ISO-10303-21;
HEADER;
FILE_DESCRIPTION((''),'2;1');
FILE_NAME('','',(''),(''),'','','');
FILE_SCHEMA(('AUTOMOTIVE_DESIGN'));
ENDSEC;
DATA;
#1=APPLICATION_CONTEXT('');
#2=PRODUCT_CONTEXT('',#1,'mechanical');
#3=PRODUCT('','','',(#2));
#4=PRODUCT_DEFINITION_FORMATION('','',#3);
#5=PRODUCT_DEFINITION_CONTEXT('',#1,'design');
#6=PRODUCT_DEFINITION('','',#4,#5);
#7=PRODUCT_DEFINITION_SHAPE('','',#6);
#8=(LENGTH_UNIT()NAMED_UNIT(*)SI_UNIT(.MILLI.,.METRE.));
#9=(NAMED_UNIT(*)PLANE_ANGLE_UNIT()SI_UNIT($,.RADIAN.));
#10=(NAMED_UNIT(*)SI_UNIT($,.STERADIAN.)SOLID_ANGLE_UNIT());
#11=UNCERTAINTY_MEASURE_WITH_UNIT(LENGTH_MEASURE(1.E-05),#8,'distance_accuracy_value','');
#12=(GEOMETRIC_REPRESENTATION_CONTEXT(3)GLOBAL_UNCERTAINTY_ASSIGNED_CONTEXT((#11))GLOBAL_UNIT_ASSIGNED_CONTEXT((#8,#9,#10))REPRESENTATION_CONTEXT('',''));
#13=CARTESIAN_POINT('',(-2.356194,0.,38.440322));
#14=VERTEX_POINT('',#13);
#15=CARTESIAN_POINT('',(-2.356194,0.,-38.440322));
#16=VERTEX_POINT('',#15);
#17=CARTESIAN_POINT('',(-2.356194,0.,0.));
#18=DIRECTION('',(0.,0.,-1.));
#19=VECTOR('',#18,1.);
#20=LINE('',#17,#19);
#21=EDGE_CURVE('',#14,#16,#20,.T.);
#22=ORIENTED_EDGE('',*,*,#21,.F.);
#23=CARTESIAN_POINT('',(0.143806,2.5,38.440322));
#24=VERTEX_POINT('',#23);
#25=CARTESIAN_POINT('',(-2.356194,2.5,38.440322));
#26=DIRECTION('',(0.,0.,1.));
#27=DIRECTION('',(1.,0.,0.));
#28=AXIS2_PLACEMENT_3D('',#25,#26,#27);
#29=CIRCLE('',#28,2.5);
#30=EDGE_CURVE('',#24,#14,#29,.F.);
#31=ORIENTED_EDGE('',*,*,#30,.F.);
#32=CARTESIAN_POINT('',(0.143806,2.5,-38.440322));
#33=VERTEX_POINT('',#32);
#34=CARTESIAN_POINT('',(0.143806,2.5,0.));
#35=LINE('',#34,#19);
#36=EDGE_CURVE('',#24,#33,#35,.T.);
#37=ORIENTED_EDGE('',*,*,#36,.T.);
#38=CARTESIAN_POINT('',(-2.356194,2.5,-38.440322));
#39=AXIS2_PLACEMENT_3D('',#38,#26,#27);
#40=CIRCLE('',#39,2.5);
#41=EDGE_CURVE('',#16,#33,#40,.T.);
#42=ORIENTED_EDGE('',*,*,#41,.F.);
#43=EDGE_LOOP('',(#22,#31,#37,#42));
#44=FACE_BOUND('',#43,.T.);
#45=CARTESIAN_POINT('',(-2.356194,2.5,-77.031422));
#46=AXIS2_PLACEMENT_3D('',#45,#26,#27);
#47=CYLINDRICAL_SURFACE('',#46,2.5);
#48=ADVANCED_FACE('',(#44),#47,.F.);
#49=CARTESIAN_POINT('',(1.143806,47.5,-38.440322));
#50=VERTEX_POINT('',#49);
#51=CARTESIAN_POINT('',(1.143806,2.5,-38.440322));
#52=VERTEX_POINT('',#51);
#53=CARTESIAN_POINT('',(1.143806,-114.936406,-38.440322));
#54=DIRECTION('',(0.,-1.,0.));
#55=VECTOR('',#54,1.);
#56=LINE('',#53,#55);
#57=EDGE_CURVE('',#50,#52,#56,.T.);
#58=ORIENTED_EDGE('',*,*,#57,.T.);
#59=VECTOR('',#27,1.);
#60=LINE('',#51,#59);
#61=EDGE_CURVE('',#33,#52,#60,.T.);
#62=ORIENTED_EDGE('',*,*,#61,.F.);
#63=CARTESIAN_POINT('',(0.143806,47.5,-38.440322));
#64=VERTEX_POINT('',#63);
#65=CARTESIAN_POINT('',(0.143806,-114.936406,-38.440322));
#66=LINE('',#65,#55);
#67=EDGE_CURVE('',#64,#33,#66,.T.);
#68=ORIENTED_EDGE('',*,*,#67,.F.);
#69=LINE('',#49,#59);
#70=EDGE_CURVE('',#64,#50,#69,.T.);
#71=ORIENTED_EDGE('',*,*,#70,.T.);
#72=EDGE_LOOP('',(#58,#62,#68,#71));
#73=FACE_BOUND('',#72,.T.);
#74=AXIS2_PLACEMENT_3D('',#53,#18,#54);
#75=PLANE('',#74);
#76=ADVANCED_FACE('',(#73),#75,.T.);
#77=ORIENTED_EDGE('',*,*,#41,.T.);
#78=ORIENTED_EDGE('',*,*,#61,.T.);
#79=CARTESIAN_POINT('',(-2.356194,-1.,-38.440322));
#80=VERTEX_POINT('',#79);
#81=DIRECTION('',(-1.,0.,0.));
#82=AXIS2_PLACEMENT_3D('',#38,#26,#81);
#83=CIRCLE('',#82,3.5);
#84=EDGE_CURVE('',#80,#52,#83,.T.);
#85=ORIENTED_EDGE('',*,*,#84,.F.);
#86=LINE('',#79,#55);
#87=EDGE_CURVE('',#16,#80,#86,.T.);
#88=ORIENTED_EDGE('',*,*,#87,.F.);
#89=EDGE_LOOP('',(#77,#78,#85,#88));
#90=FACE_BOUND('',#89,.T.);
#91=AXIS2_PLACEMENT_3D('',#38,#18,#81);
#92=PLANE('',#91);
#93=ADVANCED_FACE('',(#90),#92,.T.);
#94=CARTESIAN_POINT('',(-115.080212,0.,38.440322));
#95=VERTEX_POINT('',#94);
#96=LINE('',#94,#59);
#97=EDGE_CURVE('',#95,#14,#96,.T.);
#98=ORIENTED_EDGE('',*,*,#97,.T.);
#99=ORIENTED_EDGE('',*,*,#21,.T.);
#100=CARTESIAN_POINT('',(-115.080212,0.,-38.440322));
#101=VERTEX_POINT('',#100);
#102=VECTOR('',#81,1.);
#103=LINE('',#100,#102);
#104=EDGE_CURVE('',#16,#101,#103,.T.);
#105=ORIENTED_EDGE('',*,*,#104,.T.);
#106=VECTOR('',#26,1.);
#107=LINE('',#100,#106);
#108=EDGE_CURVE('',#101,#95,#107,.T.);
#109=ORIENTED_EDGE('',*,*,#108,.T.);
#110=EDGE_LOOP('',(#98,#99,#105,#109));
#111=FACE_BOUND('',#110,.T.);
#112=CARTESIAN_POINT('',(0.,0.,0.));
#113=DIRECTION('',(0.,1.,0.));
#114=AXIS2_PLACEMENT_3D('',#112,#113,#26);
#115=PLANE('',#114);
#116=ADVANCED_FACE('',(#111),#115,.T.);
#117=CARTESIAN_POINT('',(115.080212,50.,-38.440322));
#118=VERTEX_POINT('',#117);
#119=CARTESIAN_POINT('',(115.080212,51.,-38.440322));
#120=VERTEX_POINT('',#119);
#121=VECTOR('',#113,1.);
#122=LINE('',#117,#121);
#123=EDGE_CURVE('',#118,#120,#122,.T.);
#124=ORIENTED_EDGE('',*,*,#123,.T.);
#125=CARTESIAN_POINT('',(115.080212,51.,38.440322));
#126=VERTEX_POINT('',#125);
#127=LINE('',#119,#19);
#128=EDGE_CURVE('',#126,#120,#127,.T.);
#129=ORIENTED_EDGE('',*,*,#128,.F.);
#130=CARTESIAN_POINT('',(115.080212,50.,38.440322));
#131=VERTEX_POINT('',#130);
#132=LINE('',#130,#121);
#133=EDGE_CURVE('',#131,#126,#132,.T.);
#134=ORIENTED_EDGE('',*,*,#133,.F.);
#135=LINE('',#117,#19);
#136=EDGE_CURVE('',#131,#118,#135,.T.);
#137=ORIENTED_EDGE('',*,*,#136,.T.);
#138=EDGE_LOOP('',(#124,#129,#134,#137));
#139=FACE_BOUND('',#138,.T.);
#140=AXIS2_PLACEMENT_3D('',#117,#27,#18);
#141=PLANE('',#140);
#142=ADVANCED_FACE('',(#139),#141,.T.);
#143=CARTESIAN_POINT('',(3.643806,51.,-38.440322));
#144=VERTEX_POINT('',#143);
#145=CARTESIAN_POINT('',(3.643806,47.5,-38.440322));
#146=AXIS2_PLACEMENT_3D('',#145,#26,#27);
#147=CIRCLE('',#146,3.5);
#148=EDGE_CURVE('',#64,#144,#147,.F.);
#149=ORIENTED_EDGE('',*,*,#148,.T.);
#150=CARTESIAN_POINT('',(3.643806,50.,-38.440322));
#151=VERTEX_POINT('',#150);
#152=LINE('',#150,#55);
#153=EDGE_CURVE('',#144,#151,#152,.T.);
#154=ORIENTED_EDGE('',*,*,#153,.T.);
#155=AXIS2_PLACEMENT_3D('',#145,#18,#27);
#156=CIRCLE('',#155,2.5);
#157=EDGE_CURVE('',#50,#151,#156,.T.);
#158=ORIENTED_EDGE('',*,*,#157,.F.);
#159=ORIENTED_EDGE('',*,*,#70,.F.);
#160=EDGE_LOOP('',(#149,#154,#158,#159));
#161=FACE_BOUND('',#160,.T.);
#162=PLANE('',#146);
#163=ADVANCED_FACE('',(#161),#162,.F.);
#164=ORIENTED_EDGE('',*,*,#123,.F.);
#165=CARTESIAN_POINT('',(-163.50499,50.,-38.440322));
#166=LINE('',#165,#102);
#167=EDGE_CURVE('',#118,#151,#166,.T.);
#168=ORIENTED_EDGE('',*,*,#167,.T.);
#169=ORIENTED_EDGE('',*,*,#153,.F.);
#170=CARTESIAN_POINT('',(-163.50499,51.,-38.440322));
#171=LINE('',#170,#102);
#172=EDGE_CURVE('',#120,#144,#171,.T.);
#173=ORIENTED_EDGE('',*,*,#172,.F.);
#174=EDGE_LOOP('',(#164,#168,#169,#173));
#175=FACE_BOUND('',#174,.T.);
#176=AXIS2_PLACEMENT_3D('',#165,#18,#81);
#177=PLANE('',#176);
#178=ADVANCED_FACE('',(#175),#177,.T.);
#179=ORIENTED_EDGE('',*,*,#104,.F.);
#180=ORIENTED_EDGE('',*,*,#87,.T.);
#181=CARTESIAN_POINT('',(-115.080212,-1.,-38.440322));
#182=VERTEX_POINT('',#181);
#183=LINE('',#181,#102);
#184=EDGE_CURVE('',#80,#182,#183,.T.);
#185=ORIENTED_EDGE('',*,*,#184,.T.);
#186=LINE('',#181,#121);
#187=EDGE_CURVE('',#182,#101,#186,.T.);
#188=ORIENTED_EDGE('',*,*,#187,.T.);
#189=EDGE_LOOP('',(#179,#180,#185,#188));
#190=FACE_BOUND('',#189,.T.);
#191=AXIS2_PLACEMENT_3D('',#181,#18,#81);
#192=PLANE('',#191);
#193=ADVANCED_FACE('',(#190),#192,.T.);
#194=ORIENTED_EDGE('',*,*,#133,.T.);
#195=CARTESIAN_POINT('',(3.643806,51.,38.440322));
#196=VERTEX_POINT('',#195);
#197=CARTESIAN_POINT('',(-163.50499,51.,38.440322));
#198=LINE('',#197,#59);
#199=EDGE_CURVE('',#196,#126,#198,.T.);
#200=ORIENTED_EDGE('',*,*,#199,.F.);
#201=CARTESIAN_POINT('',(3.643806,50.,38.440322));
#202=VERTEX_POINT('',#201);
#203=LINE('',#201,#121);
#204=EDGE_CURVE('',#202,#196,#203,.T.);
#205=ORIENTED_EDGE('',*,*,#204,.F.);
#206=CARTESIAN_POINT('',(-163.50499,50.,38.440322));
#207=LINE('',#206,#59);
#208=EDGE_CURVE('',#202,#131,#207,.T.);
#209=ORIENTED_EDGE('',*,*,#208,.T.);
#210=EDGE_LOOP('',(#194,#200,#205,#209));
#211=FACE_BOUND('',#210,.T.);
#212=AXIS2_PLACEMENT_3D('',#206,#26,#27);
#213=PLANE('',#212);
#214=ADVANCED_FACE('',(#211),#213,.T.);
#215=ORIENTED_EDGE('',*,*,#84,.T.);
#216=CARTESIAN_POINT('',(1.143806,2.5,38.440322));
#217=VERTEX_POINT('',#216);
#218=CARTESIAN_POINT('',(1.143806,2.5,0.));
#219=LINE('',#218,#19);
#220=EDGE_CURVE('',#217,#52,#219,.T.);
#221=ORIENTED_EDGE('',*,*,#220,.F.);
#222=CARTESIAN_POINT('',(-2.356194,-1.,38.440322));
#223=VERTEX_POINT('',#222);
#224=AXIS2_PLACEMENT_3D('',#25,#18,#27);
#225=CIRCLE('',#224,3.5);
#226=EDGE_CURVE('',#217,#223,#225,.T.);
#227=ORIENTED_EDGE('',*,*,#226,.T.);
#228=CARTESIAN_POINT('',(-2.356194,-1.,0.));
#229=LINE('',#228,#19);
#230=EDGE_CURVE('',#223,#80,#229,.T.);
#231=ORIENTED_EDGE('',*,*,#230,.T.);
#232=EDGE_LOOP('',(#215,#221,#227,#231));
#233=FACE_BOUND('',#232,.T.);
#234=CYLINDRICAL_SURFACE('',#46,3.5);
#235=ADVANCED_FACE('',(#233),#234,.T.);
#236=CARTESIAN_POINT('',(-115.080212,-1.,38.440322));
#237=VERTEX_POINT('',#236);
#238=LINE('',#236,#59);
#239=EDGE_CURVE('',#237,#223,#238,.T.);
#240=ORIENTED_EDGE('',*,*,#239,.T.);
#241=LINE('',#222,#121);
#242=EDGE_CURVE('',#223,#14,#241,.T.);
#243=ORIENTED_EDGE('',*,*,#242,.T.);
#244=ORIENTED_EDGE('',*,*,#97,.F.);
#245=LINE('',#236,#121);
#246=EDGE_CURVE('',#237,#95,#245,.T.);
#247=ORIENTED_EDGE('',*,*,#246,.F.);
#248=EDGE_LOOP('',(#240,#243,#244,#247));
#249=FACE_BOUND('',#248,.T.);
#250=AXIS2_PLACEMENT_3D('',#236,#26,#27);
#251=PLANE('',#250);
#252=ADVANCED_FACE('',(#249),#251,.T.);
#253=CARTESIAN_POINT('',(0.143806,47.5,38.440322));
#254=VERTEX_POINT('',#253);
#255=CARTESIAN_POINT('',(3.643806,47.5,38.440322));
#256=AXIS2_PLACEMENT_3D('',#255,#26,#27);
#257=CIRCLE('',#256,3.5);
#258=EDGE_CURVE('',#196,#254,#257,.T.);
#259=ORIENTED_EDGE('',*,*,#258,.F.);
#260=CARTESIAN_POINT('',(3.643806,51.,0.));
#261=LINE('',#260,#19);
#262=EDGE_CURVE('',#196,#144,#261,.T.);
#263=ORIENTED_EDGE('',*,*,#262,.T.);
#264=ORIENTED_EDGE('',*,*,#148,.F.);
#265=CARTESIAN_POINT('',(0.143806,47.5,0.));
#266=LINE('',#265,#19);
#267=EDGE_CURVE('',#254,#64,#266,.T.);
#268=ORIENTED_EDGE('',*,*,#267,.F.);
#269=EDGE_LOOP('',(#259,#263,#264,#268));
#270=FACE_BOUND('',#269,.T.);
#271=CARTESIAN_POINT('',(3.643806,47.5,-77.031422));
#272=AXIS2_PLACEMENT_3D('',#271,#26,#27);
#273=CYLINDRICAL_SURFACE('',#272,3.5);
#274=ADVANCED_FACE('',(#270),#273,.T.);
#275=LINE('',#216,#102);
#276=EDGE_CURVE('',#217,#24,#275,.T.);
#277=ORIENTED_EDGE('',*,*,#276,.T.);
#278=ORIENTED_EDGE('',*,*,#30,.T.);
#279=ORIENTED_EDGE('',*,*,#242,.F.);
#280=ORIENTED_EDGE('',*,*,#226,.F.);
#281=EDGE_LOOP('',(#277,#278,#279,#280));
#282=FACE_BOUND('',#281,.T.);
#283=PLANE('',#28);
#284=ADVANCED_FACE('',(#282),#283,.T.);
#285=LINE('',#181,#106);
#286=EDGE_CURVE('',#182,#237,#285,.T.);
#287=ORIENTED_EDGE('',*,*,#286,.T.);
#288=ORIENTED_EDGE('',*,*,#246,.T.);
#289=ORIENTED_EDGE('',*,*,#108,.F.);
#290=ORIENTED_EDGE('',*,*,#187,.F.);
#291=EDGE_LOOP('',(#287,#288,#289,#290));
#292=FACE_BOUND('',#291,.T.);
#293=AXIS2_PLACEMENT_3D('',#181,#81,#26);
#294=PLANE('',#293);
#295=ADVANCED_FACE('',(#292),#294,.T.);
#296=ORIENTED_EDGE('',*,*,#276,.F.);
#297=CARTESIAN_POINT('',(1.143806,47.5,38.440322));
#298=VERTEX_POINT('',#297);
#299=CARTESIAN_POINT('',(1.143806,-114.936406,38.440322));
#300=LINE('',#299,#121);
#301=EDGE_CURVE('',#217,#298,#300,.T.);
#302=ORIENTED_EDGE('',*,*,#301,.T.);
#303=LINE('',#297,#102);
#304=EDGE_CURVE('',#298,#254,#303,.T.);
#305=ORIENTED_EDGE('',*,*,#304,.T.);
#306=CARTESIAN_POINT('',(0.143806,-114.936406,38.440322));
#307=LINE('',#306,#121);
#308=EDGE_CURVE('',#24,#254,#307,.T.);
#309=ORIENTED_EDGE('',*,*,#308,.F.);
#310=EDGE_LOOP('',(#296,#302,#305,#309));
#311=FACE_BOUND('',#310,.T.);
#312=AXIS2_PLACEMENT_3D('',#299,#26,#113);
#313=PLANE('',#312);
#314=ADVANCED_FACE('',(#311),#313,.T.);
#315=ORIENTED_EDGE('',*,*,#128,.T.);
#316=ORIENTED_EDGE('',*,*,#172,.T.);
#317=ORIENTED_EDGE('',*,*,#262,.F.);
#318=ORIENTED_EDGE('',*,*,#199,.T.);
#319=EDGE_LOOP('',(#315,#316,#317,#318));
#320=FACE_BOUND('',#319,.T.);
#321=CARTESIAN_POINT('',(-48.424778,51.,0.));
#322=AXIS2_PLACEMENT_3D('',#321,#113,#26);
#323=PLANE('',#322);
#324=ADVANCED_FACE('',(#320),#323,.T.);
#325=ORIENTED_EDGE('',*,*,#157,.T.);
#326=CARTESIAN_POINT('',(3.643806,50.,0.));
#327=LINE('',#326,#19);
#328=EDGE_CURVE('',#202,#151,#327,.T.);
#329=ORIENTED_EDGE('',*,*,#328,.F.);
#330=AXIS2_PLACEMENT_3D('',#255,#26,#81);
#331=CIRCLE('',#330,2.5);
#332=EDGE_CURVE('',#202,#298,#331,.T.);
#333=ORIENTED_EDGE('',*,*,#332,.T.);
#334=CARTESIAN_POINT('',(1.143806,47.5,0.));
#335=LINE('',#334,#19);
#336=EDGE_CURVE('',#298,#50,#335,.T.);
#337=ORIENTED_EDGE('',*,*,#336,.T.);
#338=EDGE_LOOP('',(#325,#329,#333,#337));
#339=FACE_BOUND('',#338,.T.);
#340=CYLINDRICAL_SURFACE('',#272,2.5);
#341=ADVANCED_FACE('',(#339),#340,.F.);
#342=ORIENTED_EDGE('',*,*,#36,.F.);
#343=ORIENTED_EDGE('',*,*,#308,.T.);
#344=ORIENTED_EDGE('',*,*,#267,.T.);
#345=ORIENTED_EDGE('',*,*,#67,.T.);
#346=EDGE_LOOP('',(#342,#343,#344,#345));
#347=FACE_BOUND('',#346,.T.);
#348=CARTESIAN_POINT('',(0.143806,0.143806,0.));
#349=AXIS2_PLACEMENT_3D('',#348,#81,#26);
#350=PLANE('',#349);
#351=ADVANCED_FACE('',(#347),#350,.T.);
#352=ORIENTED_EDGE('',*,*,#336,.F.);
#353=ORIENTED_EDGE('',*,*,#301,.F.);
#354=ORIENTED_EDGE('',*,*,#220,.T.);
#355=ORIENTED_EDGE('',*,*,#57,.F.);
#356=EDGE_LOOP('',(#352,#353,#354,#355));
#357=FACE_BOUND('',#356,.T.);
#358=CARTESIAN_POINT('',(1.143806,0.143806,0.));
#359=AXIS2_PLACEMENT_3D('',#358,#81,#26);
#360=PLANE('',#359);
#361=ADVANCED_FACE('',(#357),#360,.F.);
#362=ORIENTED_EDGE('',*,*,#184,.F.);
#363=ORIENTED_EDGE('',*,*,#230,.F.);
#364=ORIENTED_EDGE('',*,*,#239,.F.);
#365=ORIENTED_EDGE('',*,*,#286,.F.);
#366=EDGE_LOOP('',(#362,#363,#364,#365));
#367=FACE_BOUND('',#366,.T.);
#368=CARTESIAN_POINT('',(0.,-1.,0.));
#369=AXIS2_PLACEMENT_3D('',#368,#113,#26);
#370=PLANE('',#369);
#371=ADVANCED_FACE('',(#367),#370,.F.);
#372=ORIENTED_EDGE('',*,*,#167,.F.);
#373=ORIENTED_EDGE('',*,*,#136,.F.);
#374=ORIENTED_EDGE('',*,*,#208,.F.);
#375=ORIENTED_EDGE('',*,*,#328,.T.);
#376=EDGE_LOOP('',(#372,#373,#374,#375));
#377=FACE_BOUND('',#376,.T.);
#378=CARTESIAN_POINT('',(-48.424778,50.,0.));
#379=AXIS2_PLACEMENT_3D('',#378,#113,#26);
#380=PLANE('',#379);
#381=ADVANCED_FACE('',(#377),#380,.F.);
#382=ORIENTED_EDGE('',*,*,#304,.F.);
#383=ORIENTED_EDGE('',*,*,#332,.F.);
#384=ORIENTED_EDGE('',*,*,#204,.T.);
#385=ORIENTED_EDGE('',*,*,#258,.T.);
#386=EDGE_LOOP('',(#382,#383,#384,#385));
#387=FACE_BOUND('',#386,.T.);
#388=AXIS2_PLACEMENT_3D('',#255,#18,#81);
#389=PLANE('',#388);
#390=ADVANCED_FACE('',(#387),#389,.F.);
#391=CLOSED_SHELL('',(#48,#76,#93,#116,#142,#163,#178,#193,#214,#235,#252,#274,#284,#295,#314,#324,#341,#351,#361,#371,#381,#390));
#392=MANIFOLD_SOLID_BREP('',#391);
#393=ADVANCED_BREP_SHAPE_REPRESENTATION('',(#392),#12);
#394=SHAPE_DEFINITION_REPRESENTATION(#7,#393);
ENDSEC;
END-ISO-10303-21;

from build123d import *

# Parameters (mm, degrees)
SKETCH_1_W             = 230.160423268
SKETCH_1_H             = 76.880643476
SM_BASE_FLANGE_1_DEPTH = 1
OTHER_START            = -38.440321738
OTHER_1_DEPTH          = 76.880643476
OTHER_1_2_DEPTH        = 76.880643476


# Read off the part's stored shape, not the designer's step: 转折1
# Sheet-metal steps are written as plain solids
with BuildPart() as part:
    # Sketch 1 → 基体-法兰1 (new body)
    with BuildSketch(Plane(origin=(0, 0, 0), x_dir=(1, 0, 0), z_dir=(0, 1, 0))):
        Rectangle(SKETCH_1_W, SKETCH_1_H)
    extrude(amount=-SM_BASE_FLANGE_1_DEPTH)

    # Other 1 outline → Other 1 (cut)
    with BuildSketch(Plane.XY.offset(OTHER_START)):
        with BuildLine():
            Line((115.080211634, 0), (0.093295252, 0))
            ThreePointArc((0.093295252, 0), (-1.033318835, -0.740370349), (-2.35619449, -1))
            Line((-2.35619449, -1), (115.080211634, -1))
            Line((115.080211634, -1), (115.080211634, 0))
        make_face()
    extrude(amount=OTHER_1_DEPTH, mode=Mode.SUBTRACT)

    # Other 1 2 outline → Other 1 2 (add)
    with BuildSketch(Plane.XY.offset(OTHER_START)):
        with BuildLine():
            ThreePointArc((3.64380551, 51), (1.168931776, 49.974873734), (0.14380551, 47.5))
            Line((0.14380551, 47.5), (0.14380551, 2.5))
            ThreePointArc((0.14380551, 2.5), (-0.588427537, 0.732233047), (-2.35619449, 0))
            Line((-2.35619449, 0), (0.093295252, 0))
            ThreePointArc((0.093295252, 0), (0.870507704, 1.144126499), (1.14380551, 2.5))
            Line((1.14380551, 2.5), (1.14380551, 47.5))
            ThreePointArc((1.14380551, 47.5), (1.876038557, 49.267766953), (3.64380551, 50))
            Line((3.64380551, 50), (115.080211634, 50))
            Line((115.080211634, 50), (115.080211634, 51))
            Line((115.080211634, 51), (3.64380551, 51))
        make_face()
    extrude(amount=OTHER_1_2_DEPTH)


solid = part.part
